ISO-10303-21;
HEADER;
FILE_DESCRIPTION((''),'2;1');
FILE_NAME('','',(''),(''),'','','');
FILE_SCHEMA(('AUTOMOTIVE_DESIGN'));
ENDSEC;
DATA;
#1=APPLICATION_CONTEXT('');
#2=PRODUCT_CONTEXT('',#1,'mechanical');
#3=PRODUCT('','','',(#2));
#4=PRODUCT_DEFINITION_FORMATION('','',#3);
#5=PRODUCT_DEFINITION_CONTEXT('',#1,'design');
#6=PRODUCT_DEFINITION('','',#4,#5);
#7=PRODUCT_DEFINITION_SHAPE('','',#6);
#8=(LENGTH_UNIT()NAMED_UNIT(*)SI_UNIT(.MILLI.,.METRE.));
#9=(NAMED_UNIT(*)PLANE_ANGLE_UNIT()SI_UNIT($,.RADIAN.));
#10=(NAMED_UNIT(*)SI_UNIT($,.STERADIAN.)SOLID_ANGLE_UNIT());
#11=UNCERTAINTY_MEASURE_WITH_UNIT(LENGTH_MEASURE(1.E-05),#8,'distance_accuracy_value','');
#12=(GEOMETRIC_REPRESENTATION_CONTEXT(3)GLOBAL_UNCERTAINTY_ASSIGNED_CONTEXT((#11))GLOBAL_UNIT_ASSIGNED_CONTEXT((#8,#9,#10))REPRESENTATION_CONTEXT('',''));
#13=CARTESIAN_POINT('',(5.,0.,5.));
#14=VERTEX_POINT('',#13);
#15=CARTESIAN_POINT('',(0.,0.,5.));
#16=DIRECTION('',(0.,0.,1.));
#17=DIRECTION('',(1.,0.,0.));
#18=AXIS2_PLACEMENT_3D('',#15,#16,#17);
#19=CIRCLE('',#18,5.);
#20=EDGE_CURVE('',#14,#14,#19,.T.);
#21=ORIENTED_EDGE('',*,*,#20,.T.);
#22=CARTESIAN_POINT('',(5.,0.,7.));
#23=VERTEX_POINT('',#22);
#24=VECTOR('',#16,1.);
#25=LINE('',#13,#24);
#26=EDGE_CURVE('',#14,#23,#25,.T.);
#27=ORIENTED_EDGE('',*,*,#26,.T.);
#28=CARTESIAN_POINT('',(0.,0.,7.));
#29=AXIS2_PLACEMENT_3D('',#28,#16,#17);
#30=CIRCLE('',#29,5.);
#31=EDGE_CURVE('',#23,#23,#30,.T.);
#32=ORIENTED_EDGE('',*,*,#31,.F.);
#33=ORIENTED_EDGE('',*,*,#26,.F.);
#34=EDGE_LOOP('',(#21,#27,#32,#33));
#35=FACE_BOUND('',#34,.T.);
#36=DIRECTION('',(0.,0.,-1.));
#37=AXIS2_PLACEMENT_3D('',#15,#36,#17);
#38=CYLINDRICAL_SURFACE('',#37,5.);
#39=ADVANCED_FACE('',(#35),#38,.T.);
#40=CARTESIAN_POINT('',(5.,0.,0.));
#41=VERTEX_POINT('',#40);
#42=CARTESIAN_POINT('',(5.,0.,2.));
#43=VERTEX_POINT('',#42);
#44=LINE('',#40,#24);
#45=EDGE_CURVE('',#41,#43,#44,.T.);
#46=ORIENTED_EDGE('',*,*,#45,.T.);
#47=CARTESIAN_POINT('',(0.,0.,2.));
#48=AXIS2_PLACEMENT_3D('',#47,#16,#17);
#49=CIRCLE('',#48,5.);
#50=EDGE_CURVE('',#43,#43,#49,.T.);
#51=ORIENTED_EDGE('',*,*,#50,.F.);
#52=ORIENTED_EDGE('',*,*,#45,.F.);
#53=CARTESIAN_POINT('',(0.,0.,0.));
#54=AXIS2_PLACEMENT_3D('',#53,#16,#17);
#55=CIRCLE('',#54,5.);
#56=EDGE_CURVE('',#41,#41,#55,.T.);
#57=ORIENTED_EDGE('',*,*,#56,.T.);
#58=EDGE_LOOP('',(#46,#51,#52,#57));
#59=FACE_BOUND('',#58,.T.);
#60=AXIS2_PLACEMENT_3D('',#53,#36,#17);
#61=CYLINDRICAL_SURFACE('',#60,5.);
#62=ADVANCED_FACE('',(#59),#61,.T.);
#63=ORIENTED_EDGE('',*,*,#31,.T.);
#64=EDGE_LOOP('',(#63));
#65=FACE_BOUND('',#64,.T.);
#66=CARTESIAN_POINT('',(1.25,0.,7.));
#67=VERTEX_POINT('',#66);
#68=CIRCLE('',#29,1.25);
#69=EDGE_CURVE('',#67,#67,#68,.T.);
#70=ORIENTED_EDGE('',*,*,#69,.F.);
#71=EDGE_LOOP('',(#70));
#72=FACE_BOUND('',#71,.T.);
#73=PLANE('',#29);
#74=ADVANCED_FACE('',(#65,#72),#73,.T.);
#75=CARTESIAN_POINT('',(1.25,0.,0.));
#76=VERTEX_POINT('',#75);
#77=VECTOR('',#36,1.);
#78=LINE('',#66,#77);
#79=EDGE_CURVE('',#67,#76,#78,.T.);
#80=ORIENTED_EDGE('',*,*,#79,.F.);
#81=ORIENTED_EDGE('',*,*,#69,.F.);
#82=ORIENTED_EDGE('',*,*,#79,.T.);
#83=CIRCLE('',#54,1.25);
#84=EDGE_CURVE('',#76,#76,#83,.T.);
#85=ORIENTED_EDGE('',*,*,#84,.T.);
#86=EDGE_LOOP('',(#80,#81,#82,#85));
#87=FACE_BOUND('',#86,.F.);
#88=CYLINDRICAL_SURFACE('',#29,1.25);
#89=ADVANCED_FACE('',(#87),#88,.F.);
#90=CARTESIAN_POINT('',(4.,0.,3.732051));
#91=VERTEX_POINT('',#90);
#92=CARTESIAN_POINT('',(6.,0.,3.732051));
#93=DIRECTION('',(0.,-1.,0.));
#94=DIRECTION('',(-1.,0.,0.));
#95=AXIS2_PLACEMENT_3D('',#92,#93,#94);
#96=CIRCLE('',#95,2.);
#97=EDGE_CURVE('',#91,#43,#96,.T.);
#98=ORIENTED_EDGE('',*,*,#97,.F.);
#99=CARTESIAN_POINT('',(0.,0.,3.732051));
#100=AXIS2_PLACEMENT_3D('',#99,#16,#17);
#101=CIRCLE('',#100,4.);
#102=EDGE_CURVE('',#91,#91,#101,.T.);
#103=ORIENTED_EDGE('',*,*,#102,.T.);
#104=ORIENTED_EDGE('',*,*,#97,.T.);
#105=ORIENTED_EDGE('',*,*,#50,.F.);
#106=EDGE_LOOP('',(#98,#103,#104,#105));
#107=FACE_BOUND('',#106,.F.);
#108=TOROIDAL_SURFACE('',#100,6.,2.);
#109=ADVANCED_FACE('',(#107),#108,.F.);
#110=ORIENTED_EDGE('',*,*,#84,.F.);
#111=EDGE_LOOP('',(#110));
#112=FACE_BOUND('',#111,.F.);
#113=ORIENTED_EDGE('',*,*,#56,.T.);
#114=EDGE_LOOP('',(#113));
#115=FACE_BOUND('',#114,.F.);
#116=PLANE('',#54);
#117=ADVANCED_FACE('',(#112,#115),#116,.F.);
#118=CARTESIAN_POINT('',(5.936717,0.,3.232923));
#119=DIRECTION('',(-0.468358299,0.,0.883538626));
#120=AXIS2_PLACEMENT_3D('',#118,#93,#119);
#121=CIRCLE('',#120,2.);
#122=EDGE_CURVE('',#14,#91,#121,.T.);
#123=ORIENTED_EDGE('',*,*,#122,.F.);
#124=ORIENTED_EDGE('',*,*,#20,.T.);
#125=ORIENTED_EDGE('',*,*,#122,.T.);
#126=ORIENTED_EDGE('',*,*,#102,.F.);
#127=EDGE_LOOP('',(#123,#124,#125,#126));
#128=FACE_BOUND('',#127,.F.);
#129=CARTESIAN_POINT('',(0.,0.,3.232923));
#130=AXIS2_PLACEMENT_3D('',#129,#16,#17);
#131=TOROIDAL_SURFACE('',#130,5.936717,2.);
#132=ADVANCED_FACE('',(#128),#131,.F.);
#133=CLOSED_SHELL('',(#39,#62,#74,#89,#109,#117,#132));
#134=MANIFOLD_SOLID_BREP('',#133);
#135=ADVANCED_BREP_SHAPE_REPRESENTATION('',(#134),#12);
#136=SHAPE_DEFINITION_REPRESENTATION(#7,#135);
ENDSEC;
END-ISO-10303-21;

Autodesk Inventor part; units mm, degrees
ref_plane "YZ Plane" through (0, 0, 0) normal (1, 0, 0) x (0, 1, 0)
ref_plane "XZ Plane" through (0, 0, 0) normal (0, 1, 0) x (-1, 0, 0)
ref_plane "XY Plane" through (0, 0, 0) normal (0, 0, 1) x (1, 0, 0)
sketch "Sketch1" plane through (0, 0, 0) normal (0, 0, 1) x (1, 0, 0)
  circle A0 centre (0, 0) radius 5
  dimension "d0" = 10
extrude "Extrusion1" add sketch "Sketch1" along normal blind 2
sketch "Sketch2" plane through (0, 0, 2) normal (0, 0, 1) x (1, 0, 0)
  circle A0 centre (0, 0) radius 4
  dimension "d3" = 8
extrude "Extrusion2" add sketch "Sketch2" along normal blind 3
sketch "Sketch3" plane through (0, 0, 5) normal (0, 0, 1) x (1, 0, 0)
  circle A0 centre (0, 0) radius 5
extrude "Extrusion3" add sketch "Sketch3" along normal blind 2
fillet "Fillet1" radius 2 2 edges at (-4, 0, 2) (-4, 0, 5)
sketch "Sketch4" plane through (0, 0, 7) normal (0, 0, 1) x (1, 0, 0)
  circle A0 centre (0, 0) radius 1.25
  dimension "d9" = 2.5
extrude "Extrusion4" cut sketch "Sketch4" against normal blind 20
properties part number "pully"
